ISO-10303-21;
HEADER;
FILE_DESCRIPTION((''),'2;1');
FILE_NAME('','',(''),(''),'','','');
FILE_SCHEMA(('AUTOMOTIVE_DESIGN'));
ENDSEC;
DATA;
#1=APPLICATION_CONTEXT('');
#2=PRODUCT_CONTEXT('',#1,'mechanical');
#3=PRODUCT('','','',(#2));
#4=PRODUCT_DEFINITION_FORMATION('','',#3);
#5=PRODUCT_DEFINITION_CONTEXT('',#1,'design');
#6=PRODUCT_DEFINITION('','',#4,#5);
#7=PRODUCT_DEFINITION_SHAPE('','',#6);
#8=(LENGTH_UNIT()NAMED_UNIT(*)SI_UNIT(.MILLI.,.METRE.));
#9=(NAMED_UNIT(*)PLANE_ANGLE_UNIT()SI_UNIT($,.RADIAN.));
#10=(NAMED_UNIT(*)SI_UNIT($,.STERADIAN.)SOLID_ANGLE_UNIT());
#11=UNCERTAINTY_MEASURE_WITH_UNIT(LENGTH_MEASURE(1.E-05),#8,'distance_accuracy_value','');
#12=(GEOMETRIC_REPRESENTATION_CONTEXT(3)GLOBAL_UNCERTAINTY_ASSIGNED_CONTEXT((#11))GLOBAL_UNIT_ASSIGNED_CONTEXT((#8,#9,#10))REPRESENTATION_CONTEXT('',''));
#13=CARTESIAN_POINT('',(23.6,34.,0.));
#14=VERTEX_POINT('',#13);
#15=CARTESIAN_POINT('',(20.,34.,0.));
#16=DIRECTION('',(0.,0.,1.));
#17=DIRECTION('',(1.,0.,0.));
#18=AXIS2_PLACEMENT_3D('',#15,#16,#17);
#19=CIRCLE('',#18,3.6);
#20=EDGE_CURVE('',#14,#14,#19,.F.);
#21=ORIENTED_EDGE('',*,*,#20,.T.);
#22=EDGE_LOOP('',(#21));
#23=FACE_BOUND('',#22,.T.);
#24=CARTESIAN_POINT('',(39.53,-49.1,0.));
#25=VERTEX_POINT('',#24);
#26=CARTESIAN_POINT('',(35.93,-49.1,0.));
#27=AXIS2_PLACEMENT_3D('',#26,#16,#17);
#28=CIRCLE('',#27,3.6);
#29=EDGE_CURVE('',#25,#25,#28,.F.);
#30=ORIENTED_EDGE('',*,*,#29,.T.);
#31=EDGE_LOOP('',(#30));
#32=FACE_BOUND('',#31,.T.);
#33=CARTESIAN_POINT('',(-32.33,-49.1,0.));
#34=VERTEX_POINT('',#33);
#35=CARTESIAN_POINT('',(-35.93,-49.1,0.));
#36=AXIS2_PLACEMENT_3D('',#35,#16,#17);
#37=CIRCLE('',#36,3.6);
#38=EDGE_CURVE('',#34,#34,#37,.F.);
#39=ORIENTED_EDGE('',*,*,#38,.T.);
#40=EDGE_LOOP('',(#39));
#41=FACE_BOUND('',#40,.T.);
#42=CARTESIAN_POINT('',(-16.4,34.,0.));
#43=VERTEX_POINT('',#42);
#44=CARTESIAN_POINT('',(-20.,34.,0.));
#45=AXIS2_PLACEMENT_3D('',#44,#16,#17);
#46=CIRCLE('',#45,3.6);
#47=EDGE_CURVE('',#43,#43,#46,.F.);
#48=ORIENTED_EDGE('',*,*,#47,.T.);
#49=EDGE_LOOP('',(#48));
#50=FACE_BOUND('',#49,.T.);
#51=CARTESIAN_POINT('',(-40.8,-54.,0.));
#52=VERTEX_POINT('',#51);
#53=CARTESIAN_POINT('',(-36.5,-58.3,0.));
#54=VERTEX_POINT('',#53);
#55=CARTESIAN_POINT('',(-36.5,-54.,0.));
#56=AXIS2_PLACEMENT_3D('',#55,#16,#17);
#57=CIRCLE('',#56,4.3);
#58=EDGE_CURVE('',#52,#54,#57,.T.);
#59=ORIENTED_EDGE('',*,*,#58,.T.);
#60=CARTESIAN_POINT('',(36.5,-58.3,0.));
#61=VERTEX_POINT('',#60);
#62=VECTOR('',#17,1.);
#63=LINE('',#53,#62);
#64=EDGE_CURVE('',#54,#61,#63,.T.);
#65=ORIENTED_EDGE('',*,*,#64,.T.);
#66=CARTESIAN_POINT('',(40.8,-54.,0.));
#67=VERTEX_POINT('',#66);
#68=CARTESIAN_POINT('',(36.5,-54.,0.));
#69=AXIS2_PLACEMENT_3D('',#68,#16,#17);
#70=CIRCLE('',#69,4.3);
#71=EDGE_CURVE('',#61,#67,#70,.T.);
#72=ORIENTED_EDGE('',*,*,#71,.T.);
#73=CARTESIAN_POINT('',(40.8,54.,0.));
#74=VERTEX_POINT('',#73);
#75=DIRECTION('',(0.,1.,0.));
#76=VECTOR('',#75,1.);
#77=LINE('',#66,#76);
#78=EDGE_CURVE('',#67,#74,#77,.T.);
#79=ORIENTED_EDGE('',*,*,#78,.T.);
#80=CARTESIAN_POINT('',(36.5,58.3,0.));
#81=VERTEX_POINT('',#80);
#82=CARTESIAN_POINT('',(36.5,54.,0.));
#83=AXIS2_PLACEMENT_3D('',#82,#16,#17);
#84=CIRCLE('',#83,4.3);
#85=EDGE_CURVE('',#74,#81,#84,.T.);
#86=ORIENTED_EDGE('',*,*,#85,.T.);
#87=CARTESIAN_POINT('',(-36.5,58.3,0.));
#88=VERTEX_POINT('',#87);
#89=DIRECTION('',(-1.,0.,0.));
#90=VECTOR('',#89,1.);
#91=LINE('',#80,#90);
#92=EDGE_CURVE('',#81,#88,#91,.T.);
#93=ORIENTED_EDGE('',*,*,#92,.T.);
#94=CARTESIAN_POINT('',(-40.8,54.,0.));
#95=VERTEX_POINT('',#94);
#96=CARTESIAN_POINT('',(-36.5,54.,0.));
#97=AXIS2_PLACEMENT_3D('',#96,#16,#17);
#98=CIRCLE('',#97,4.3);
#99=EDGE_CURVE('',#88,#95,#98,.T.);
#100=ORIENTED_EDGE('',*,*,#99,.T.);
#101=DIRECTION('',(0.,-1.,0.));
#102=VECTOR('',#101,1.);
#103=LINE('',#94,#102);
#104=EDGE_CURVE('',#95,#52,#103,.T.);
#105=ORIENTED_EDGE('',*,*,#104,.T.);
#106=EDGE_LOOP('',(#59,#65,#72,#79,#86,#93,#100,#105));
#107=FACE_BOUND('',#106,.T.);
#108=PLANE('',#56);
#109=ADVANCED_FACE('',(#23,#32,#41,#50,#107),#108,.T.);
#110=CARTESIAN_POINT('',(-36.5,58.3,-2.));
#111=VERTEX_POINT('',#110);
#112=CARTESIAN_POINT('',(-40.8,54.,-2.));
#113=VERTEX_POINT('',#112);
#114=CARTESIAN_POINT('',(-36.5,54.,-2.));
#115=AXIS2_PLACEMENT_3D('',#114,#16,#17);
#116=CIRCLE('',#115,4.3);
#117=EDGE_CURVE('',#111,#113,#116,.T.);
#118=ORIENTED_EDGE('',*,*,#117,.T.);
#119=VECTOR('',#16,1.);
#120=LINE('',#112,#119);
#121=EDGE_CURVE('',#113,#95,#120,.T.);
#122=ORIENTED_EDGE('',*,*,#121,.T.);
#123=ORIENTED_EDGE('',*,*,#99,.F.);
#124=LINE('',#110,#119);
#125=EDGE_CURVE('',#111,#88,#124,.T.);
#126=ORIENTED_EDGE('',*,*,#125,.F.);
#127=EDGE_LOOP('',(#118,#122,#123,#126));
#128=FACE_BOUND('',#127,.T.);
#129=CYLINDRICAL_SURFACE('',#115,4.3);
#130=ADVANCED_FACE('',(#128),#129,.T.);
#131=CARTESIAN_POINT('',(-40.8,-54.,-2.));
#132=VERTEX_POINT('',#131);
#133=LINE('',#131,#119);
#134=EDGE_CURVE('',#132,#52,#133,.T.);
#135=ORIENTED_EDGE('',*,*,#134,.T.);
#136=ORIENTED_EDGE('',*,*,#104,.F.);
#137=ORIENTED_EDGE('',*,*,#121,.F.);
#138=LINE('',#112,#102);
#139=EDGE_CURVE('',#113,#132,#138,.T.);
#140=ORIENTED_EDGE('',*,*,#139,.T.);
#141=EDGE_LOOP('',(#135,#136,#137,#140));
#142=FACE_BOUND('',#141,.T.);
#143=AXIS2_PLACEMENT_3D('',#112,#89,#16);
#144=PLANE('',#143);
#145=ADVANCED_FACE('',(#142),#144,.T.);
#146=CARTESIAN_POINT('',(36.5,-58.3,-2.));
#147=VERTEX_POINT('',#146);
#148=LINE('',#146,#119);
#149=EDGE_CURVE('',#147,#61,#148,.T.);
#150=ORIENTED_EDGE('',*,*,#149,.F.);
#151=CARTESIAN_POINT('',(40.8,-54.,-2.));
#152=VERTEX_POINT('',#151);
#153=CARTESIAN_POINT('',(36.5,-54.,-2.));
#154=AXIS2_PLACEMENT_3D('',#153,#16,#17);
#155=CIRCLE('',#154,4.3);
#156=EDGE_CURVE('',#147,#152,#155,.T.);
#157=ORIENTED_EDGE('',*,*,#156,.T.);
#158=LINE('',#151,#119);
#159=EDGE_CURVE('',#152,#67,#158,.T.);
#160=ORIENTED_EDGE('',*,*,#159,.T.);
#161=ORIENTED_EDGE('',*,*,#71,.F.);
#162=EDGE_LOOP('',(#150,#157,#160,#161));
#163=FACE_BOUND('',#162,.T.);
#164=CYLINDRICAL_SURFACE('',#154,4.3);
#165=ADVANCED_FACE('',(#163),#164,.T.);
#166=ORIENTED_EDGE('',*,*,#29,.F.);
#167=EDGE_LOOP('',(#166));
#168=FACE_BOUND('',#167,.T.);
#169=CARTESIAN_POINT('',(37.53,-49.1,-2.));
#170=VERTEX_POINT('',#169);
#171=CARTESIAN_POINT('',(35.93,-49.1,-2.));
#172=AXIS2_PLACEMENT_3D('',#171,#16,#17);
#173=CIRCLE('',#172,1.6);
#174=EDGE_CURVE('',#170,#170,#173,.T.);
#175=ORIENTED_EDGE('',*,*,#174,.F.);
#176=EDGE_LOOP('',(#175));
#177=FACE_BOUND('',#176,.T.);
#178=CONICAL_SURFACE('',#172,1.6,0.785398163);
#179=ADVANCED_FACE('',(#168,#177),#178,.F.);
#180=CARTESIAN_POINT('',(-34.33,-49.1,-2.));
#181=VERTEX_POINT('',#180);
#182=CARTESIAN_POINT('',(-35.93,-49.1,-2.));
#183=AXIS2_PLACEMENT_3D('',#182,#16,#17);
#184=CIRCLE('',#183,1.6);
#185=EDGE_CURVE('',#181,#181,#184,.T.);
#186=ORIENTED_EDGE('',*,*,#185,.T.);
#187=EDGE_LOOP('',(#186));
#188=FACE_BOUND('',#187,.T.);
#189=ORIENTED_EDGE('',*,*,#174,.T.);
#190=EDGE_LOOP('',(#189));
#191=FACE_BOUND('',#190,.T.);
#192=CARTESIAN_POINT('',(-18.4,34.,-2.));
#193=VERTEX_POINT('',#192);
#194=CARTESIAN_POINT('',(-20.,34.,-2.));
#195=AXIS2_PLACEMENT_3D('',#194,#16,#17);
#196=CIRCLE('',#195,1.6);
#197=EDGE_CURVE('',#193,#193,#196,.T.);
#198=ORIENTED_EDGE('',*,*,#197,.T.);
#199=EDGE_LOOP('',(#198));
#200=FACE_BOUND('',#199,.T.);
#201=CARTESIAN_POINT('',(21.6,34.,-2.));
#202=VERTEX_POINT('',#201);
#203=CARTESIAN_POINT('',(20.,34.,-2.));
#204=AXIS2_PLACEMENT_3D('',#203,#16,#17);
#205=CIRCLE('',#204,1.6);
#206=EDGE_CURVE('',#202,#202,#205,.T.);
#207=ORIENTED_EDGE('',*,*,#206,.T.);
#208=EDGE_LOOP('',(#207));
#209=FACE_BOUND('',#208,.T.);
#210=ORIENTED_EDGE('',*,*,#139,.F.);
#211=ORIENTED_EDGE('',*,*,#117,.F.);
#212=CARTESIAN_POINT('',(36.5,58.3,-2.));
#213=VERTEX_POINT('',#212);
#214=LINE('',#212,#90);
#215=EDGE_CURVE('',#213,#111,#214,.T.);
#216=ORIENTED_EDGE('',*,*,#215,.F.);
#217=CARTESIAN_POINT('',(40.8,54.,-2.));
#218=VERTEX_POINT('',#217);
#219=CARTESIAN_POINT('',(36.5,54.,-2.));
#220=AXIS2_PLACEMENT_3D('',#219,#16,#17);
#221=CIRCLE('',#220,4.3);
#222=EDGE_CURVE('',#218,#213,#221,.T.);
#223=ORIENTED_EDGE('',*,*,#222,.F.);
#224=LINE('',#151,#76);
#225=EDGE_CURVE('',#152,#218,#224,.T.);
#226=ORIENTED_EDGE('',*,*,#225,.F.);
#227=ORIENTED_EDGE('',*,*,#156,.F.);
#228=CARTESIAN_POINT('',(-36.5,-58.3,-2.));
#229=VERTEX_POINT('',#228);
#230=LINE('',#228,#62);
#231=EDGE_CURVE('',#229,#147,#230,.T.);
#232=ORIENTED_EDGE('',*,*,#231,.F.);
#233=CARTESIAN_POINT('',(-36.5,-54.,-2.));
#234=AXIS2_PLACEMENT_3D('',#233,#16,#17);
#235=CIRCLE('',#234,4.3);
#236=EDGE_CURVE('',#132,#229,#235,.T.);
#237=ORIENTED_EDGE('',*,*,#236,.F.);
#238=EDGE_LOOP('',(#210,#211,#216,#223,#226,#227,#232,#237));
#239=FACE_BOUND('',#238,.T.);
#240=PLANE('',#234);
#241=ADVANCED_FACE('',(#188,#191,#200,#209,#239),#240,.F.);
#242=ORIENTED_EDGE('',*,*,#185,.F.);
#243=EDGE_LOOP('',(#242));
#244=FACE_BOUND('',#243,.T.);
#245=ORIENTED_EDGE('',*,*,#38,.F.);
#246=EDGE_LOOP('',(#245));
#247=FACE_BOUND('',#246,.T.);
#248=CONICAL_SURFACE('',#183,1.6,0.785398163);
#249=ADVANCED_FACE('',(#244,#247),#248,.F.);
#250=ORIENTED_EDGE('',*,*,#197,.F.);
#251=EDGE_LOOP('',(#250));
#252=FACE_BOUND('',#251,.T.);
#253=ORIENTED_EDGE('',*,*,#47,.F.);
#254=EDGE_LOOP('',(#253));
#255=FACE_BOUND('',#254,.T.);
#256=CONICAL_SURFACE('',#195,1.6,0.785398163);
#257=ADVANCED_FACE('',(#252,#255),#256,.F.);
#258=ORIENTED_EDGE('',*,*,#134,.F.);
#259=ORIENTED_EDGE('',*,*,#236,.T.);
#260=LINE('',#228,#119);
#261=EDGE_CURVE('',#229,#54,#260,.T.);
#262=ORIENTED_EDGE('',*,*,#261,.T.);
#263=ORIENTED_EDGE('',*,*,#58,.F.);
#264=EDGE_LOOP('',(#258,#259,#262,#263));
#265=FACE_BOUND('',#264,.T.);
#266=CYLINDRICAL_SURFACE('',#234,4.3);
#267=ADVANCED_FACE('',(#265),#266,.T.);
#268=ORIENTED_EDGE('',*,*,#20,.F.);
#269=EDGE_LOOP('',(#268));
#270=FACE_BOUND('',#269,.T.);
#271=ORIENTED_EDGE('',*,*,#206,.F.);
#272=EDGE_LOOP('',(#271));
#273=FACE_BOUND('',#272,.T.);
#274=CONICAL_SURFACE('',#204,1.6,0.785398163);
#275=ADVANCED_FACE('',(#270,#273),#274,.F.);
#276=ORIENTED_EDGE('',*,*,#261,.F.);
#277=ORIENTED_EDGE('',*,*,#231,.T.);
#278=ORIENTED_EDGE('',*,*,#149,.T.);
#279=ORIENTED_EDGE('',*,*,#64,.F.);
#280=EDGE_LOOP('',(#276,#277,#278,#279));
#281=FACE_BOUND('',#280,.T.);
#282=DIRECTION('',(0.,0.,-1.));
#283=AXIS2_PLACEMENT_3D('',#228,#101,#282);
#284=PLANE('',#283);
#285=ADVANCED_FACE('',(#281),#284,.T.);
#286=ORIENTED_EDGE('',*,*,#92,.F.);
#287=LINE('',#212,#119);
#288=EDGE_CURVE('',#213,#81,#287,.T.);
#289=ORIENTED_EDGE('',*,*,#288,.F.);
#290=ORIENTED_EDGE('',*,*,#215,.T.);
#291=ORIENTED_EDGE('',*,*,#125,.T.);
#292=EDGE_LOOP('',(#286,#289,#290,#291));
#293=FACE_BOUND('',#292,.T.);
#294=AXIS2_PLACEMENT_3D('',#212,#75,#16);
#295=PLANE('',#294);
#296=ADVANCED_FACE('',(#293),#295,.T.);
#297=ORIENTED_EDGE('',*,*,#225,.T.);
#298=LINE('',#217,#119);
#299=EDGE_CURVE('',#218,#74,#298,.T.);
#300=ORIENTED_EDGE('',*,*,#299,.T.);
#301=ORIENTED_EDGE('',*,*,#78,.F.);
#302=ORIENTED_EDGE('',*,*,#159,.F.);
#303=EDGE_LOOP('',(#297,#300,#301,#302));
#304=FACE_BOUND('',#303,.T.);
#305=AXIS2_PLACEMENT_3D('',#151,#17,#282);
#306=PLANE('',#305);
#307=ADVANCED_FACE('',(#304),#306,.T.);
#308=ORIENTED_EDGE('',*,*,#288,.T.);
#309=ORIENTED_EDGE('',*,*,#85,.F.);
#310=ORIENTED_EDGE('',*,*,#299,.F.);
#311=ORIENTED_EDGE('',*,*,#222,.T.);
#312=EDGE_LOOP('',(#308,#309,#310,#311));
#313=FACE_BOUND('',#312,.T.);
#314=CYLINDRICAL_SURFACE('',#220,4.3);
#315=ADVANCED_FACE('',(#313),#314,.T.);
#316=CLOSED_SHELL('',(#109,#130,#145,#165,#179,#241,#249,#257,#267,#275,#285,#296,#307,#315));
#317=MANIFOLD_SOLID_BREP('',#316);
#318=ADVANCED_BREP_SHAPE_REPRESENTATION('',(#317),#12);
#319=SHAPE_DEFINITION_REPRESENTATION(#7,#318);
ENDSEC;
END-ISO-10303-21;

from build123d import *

# Parameters (mm, degrees)
ESQUISSE1_R        = 1.6
BOSS_EXTRU_1_DEPTH = 2
CHANFREIN1_SIZE    = 2


with BuildPart() as part:
    # Esquisse1 → Boss.-Extru.1 (new body)
    with BuildSketch(Plane.XY):
        with BuildLine():
            Line((-36.5, -58.3), (36.5, -58.3))
            ThreePointArc((36.5, -58.3), (39.540559159, -57.040559159), (40.8, -54))
            Line((40.8, -54), (40.8, 54))
            ThreePointArc((40.8, 54), (39.540559159, 57.040559159), (36.5, 58.3))
            Line((36.5, 58.3), (-36.5, 58.3))
            ThreePointArc((-36.5, 58.3), (-39.540559159, 57.040559159), (-40.8, 54))
            Line((-40.8, 54), (-40.8, -54))
            ThreePointArc((-40.8, -54), (-39.540559159, -57.040559159), (-36.5, -58.3))
        make_face()
        with Locations((35.93, -49.1)):
            Circle(ESQUISSE1_R, mode=Mode.SUBTRACT)
        with Locations((-35.93, -49.1)):
            Circle(ESQUISSE1_R, mode=Mode.SUBTRACT)
        with Locations((-20, 34)):
            Circle(ESQUISSE1_R, mode=Mode.SUBTRACT)
        with Locations((20, 34)):
            Circle(ESQUISSE1_R, mode=Mode.SUBTRACT)
    extrude(amount=-BOSS_EXTRU_1_DEPTH)

    # Chanfrein1
    chanfrein1_edges = [part.edges().sort_by_distance(p)[0] for p in [
        (34.33, -49.1, 0),
        (-37.53, -49.1, 0),
        (-21.6, 34, 0),
        (18.4, 34, 0),
    ]]
    chamfer(chanfrein1_edges, length=CHANFREIN1_SIZE - 0.0001)  # a hair under: the kernel refuses the full size


solid = part.part
